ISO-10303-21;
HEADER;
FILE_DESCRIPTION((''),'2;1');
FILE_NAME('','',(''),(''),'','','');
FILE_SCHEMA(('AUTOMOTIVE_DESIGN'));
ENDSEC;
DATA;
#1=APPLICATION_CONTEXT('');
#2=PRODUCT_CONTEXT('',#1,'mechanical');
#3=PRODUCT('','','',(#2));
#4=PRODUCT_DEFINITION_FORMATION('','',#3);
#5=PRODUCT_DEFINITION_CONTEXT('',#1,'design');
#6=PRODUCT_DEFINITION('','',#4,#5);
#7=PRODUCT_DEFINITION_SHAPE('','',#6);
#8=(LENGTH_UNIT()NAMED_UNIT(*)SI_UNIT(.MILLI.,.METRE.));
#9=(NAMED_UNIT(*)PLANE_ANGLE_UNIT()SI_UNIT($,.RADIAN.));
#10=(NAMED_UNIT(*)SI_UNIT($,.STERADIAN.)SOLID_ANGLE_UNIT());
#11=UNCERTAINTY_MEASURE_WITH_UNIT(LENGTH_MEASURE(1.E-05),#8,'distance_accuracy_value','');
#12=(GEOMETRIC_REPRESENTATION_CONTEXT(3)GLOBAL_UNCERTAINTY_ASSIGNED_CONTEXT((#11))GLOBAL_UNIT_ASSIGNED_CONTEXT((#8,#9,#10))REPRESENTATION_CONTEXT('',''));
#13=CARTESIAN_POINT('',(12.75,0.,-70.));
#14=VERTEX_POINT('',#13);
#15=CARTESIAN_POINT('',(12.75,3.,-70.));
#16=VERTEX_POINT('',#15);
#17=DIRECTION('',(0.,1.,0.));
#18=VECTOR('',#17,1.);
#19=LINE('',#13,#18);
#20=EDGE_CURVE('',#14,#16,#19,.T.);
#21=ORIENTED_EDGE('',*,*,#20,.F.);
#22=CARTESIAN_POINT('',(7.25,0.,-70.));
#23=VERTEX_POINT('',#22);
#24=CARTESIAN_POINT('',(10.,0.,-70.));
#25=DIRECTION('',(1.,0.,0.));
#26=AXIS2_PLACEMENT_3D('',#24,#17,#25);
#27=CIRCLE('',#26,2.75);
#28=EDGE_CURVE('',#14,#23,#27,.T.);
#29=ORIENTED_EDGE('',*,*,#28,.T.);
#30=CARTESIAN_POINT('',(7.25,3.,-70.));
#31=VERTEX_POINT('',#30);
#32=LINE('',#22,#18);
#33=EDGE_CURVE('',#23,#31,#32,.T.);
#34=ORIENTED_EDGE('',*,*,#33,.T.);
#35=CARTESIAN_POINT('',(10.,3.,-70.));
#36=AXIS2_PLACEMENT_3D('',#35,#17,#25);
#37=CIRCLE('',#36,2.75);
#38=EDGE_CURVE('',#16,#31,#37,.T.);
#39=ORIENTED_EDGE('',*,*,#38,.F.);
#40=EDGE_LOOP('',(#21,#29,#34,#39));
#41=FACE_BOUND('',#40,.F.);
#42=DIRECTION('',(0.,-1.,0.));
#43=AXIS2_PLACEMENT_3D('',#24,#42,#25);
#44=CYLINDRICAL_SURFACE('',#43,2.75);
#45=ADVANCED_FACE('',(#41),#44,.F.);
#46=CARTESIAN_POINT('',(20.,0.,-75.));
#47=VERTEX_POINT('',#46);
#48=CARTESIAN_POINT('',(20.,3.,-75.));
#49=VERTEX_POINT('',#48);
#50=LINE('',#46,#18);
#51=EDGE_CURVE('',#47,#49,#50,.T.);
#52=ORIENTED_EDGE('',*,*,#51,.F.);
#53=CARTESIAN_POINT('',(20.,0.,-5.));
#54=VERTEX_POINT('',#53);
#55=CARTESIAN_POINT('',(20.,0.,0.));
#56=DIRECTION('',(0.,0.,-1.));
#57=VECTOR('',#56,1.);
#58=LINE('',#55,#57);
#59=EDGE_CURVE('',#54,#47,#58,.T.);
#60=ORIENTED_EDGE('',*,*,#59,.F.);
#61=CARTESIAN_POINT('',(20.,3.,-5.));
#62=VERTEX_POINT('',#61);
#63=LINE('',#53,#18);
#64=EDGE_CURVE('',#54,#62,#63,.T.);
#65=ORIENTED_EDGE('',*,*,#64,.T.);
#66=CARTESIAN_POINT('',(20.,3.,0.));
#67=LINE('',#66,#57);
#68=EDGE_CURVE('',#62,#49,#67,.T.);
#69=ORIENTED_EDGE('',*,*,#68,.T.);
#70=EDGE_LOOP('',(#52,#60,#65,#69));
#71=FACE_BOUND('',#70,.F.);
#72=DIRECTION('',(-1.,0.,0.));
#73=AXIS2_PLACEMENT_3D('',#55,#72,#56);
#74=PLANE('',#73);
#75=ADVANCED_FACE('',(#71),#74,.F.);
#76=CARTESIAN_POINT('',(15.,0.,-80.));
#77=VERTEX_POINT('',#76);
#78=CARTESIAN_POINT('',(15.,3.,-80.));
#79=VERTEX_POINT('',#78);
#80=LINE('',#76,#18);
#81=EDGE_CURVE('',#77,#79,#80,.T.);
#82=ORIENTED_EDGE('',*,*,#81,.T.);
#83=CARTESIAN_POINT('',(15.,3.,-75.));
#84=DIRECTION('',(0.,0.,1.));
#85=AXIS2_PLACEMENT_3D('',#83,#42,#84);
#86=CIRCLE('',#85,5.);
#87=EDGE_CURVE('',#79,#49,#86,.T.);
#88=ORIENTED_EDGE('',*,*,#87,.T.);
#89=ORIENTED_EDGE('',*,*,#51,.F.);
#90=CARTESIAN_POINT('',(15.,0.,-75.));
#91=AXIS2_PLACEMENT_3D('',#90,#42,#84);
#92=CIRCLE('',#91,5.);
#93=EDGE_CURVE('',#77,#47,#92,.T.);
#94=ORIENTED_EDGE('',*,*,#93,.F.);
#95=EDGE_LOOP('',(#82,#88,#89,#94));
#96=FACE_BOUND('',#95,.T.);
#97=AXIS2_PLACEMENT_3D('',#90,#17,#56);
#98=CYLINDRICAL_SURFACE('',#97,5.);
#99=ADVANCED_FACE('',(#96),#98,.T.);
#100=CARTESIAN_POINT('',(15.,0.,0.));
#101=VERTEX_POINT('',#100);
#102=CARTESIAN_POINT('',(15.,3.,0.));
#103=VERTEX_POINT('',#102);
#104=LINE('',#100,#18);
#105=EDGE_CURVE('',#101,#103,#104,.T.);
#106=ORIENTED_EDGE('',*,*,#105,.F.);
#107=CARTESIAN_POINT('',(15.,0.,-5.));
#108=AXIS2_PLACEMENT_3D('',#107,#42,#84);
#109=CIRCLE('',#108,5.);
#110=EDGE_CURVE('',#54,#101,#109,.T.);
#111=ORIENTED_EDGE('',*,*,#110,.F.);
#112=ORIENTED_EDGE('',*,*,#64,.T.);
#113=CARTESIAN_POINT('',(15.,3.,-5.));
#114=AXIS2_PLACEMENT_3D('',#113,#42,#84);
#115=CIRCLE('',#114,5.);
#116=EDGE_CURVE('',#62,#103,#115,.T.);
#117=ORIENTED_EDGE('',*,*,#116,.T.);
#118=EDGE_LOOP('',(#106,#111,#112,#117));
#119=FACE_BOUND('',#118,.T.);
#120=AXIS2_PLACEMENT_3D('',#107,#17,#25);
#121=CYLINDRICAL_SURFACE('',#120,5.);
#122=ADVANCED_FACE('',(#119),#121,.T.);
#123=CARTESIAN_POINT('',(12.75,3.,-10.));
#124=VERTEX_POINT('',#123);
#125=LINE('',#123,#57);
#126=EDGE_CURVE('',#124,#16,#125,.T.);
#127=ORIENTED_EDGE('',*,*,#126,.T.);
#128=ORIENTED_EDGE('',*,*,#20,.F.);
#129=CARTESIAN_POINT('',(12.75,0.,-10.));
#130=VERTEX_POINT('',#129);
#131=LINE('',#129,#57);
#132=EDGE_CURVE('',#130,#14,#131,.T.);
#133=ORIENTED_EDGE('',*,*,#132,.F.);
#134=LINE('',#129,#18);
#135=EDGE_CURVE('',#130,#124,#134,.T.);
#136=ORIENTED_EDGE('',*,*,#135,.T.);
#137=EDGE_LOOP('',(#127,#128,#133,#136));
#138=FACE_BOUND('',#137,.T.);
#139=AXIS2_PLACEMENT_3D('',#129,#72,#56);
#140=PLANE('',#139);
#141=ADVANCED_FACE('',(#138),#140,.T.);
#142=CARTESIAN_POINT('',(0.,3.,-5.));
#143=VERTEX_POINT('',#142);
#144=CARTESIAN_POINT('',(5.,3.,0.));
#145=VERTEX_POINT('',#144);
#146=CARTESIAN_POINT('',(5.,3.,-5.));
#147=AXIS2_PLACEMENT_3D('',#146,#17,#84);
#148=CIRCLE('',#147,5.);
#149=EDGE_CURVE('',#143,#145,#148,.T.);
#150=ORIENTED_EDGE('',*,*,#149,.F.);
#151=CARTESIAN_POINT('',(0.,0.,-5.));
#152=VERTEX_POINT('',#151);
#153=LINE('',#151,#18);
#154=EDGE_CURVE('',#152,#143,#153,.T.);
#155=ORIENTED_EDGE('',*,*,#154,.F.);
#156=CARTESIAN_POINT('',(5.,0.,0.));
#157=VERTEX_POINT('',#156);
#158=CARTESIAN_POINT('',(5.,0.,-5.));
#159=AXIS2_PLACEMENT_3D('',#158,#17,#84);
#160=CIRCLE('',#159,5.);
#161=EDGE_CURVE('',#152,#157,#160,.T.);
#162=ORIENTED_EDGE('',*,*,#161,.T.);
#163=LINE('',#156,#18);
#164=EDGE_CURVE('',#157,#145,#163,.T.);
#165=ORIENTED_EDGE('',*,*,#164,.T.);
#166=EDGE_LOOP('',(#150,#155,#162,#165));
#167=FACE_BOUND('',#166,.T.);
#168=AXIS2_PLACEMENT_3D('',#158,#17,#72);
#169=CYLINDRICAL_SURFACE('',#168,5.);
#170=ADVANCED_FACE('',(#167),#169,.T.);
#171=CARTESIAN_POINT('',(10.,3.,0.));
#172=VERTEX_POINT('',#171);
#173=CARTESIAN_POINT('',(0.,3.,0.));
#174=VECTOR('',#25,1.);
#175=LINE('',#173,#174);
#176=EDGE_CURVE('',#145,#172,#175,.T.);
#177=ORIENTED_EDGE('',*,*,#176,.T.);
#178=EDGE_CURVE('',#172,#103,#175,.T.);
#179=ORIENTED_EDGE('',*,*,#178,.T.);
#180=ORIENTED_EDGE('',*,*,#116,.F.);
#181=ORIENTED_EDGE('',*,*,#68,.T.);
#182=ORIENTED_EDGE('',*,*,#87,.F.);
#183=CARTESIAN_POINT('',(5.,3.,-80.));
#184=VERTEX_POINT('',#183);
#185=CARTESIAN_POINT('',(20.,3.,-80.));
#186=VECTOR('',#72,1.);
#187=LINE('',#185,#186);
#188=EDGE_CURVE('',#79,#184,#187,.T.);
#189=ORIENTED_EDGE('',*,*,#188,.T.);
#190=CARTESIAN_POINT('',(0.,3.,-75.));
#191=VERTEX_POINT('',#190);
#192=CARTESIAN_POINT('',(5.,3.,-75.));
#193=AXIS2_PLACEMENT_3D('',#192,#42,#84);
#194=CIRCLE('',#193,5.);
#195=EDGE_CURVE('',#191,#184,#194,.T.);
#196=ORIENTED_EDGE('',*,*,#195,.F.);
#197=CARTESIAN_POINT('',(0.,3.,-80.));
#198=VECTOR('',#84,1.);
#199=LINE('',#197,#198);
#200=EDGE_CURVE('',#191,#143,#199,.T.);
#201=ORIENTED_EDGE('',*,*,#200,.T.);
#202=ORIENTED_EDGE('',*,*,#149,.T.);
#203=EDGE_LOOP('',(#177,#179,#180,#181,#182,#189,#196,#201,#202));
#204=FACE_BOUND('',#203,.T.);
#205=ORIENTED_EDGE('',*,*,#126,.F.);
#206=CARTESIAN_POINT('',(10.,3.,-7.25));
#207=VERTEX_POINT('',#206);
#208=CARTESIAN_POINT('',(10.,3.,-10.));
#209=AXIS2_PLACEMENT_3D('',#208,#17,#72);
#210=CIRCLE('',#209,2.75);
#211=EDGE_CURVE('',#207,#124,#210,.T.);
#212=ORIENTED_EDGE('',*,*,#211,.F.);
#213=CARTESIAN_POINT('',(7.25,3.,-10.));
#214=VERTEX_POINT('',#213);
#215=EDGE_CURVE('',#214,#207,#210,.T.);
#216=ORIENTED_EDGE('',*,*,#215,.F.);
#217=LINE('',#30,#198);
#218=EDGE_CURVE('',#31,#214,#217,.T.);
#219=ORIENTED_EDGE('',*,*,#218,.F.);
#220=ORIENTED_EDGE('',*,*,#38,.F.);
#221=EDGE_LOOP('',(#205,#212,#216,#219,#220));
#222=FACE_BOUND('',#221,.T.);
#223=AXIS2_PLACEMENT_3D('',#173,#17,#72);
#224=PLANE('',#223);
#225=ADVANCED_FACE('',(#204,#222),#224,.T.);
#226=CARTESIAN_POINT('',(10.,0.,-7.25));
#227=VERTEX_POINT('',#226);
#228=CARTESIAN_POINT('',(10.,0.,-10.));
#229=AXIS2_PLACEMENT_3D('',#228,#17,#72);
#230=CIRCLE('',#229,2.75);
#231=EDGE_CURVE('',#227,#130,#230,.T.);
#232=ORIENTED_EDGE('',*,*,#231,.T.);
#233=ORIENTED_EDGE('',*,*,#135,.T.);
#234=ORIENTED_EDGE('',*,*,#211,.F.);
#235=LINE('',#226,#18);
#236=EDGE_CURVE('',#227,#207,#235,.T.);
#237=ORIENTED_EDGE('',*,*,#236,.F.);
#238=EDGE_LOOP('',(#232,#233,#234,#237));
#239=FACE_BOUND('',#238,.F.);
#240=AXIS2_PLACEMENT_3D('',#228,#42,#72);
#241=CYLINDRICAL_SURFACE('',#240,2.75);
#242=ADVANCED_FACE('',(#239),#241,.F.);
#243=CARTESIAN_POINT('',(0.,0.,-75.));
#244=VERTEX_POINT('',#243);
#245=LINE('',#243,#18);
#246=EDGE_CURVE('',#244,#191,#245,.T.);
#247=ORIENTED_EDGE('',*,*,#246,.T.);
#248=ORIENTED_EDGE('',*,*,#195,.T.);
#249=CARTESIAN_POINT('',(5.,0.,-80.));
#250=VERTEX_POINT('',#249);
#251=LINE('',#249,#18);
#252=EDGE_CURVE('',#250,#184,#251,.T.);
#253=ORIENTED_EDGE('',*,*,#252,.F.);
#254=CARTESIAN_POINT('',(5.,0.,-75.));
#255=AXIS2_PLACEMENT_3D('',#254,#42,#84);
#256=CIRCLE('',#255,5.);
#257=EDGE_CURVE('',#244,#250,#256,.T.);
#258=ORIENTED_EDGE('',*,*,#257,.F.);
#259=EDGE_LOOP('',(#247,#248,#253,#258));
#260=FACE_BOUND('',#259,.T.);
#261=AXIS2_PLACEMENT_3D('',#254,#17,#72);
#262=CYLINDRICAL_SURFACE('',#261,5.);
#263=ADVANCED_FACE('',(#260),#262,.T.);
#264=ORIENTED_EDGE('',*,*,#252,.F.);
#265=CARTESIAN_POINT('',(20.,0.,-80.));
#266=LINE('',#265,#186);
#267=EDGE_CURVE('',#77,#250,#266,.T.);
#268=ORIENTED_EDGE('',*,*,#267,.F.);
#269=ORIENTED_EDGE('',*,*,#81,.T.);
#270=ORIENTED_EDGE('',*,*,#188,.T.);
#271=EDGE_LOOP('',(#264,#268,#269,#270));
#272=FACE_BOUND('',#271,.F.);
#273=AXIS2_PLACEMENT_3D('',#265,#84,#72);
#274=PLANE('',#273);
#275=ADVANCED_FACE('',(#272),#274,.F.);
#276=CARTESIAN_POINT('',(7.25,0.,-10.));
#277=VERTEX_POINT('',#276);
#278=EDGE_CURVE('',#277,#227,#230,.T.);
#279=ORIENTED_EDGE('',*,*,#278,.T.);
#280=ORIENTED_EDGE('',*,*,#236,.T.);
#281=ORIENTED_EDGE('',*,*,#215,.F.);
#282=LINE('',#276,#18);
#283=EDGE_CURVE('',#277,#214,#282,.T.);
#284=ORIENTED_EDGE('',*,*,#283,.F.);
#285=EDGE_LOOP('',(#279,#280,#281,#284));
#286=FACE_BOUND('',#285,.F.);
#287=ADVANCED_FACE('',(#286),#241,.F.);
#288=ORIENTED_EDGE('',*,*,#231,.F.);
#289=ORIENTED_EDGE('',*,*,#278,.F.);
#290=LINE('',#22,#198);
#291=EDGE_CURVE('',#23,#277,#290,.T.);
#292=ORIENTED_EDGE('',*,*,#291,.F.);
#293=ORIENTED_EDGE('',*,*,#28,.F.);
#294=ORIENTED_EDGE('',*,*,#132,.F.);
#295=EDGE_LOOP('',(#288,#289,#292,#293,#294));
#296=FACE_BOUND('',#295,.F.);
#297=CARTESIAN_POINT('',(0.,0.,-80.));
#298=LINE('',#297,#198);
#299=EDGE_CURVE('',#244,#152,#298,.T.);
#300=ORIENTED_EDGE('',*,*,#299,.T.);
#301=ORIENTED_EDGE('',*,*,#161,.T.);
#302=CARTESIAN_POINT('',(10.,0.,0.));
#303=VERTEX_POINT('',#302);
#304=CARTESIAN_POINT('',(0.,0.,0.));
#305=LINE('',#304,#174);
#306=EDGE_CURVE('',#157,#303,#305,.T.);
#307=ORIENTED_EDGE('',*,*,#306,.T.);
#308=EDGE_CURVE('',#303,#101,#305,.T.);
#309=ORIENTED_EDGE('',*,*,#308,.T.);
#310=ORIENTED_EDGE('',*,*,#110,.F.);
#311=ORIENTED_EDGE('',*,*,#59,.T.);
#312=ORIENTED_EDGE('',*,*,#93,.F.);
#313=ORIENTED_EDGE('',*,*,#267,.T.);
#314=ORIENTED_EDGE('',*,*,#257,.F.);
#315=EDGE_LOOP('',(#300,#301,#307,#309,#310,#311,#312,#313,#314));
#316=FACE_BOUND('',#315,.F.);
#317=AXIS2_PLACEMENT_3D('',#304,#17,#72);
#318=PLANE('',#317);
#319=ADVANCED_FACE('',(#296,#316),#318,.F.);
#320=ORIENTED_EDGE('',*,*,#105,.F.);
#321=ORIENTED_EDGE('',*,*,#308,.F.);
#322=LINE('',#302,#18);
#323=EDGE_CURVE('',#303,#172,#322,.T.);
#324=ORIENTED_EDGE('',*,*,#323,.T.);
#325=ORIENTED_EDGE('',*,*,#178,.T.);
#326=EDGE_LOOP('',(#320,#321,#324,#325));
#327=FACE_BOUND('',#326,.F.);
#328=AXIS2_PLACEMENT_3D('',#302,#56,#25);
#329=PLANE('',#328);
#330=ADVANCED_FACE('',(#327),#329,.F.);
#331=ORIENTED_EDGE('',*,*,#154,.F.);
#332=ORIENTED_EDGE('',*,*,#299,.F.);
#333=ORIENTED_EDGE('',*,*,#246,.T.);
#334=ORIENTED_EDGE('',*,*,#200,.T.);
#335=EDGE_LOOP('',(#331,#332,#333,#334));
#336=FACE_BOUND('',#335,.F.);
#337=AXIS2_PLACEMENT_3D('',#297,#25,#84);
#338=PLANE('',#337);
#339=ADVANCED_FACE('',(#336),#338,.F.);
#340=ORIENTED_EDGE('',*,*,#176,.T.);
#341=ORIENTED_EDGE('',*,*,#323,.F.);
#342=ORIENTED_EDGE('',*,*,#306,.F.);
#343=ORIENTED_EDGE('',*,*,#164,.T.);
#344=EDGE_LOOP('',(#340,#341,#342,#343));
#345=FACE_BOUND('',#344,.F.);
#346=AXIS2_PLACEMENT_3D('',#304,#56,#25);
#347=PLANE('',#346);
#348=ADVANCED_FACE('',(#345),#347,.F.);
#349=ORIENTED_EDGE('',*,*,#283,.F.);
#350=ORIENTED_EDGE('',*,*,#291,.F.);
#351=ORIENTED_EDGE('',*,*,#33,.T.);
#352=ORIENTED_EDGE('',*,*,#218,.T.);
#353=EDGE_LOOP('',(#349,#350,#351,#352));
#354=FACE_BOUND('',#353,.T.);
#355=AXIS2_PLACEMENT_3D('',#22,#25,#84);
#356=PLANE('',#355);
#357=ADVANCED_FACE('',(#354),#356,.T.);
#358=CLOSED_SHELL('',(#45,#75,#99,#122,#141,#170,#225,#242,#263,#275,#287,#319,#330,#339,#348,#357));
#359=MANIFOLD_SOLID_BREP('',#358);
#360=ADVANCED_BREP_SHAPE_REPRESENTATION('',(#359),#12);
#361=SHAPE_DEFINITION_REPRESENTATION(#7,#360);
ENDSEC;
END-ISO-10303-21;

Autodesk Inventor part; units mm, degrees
ref_plane "YZ Plane" through (0, 0, 0) normal (1, 0, 0) x (0, 1, 0)
ref_plane "XZ Plane" through (0, 0, 0) normal (0, 1, 0) x (-1, 0, 0)
ref_plane "XY Plane" through (0, 0, 0) normal (0, 0, 1) x (1, 0, 0)
sketch "Sketch1" plane through (0, 0, 0) normal (0, 1, 0) x (-1, 0, 0)
  line L0 (0, 0) -> (-20, 0)
  line L1 (-20, 0) -> (-20, -80)
  line L2 (-20, -80) -> (0, -80)
  line L3 (0, -80) -> (0, 0)
  line L4 (-10, 0) -> (-10, -10)
  line L5 (-10, -10) -> (-10, -70) construction
  line L6 (-12.75, -10) -> (-12.75, -70)
  line L7 (-7.25, -70) -> (-7.25, -10)
  arc A0 (-7.25, -10) -> (-12.75, -10) centre (-10, -10) ccw
  arc A1 (-12.75, -70) -> (-7.25, -70) centre (-10, -70) ccw
  line L8 (-10, -10) -> (50, -10) construction
  point P0 (-10, -40)
  dimension "d0" = 20
  dimension "d1" = 80
  dimension "d2" = 10
  dimension "d3" = 60
  dimension "d4" = 90
  dimension "d5" = 5.5
extrude "Extrusion1" add sketch "Sketch1" along normal blind 3
fillet "Fillet1" radius 5 4 edges at (20, 1.5, 0) (0, 1.5, 0) (20, 1.5, -80) (0, 1.5, -80)
properties part number "Carriage_Horizontal_Spacer"
